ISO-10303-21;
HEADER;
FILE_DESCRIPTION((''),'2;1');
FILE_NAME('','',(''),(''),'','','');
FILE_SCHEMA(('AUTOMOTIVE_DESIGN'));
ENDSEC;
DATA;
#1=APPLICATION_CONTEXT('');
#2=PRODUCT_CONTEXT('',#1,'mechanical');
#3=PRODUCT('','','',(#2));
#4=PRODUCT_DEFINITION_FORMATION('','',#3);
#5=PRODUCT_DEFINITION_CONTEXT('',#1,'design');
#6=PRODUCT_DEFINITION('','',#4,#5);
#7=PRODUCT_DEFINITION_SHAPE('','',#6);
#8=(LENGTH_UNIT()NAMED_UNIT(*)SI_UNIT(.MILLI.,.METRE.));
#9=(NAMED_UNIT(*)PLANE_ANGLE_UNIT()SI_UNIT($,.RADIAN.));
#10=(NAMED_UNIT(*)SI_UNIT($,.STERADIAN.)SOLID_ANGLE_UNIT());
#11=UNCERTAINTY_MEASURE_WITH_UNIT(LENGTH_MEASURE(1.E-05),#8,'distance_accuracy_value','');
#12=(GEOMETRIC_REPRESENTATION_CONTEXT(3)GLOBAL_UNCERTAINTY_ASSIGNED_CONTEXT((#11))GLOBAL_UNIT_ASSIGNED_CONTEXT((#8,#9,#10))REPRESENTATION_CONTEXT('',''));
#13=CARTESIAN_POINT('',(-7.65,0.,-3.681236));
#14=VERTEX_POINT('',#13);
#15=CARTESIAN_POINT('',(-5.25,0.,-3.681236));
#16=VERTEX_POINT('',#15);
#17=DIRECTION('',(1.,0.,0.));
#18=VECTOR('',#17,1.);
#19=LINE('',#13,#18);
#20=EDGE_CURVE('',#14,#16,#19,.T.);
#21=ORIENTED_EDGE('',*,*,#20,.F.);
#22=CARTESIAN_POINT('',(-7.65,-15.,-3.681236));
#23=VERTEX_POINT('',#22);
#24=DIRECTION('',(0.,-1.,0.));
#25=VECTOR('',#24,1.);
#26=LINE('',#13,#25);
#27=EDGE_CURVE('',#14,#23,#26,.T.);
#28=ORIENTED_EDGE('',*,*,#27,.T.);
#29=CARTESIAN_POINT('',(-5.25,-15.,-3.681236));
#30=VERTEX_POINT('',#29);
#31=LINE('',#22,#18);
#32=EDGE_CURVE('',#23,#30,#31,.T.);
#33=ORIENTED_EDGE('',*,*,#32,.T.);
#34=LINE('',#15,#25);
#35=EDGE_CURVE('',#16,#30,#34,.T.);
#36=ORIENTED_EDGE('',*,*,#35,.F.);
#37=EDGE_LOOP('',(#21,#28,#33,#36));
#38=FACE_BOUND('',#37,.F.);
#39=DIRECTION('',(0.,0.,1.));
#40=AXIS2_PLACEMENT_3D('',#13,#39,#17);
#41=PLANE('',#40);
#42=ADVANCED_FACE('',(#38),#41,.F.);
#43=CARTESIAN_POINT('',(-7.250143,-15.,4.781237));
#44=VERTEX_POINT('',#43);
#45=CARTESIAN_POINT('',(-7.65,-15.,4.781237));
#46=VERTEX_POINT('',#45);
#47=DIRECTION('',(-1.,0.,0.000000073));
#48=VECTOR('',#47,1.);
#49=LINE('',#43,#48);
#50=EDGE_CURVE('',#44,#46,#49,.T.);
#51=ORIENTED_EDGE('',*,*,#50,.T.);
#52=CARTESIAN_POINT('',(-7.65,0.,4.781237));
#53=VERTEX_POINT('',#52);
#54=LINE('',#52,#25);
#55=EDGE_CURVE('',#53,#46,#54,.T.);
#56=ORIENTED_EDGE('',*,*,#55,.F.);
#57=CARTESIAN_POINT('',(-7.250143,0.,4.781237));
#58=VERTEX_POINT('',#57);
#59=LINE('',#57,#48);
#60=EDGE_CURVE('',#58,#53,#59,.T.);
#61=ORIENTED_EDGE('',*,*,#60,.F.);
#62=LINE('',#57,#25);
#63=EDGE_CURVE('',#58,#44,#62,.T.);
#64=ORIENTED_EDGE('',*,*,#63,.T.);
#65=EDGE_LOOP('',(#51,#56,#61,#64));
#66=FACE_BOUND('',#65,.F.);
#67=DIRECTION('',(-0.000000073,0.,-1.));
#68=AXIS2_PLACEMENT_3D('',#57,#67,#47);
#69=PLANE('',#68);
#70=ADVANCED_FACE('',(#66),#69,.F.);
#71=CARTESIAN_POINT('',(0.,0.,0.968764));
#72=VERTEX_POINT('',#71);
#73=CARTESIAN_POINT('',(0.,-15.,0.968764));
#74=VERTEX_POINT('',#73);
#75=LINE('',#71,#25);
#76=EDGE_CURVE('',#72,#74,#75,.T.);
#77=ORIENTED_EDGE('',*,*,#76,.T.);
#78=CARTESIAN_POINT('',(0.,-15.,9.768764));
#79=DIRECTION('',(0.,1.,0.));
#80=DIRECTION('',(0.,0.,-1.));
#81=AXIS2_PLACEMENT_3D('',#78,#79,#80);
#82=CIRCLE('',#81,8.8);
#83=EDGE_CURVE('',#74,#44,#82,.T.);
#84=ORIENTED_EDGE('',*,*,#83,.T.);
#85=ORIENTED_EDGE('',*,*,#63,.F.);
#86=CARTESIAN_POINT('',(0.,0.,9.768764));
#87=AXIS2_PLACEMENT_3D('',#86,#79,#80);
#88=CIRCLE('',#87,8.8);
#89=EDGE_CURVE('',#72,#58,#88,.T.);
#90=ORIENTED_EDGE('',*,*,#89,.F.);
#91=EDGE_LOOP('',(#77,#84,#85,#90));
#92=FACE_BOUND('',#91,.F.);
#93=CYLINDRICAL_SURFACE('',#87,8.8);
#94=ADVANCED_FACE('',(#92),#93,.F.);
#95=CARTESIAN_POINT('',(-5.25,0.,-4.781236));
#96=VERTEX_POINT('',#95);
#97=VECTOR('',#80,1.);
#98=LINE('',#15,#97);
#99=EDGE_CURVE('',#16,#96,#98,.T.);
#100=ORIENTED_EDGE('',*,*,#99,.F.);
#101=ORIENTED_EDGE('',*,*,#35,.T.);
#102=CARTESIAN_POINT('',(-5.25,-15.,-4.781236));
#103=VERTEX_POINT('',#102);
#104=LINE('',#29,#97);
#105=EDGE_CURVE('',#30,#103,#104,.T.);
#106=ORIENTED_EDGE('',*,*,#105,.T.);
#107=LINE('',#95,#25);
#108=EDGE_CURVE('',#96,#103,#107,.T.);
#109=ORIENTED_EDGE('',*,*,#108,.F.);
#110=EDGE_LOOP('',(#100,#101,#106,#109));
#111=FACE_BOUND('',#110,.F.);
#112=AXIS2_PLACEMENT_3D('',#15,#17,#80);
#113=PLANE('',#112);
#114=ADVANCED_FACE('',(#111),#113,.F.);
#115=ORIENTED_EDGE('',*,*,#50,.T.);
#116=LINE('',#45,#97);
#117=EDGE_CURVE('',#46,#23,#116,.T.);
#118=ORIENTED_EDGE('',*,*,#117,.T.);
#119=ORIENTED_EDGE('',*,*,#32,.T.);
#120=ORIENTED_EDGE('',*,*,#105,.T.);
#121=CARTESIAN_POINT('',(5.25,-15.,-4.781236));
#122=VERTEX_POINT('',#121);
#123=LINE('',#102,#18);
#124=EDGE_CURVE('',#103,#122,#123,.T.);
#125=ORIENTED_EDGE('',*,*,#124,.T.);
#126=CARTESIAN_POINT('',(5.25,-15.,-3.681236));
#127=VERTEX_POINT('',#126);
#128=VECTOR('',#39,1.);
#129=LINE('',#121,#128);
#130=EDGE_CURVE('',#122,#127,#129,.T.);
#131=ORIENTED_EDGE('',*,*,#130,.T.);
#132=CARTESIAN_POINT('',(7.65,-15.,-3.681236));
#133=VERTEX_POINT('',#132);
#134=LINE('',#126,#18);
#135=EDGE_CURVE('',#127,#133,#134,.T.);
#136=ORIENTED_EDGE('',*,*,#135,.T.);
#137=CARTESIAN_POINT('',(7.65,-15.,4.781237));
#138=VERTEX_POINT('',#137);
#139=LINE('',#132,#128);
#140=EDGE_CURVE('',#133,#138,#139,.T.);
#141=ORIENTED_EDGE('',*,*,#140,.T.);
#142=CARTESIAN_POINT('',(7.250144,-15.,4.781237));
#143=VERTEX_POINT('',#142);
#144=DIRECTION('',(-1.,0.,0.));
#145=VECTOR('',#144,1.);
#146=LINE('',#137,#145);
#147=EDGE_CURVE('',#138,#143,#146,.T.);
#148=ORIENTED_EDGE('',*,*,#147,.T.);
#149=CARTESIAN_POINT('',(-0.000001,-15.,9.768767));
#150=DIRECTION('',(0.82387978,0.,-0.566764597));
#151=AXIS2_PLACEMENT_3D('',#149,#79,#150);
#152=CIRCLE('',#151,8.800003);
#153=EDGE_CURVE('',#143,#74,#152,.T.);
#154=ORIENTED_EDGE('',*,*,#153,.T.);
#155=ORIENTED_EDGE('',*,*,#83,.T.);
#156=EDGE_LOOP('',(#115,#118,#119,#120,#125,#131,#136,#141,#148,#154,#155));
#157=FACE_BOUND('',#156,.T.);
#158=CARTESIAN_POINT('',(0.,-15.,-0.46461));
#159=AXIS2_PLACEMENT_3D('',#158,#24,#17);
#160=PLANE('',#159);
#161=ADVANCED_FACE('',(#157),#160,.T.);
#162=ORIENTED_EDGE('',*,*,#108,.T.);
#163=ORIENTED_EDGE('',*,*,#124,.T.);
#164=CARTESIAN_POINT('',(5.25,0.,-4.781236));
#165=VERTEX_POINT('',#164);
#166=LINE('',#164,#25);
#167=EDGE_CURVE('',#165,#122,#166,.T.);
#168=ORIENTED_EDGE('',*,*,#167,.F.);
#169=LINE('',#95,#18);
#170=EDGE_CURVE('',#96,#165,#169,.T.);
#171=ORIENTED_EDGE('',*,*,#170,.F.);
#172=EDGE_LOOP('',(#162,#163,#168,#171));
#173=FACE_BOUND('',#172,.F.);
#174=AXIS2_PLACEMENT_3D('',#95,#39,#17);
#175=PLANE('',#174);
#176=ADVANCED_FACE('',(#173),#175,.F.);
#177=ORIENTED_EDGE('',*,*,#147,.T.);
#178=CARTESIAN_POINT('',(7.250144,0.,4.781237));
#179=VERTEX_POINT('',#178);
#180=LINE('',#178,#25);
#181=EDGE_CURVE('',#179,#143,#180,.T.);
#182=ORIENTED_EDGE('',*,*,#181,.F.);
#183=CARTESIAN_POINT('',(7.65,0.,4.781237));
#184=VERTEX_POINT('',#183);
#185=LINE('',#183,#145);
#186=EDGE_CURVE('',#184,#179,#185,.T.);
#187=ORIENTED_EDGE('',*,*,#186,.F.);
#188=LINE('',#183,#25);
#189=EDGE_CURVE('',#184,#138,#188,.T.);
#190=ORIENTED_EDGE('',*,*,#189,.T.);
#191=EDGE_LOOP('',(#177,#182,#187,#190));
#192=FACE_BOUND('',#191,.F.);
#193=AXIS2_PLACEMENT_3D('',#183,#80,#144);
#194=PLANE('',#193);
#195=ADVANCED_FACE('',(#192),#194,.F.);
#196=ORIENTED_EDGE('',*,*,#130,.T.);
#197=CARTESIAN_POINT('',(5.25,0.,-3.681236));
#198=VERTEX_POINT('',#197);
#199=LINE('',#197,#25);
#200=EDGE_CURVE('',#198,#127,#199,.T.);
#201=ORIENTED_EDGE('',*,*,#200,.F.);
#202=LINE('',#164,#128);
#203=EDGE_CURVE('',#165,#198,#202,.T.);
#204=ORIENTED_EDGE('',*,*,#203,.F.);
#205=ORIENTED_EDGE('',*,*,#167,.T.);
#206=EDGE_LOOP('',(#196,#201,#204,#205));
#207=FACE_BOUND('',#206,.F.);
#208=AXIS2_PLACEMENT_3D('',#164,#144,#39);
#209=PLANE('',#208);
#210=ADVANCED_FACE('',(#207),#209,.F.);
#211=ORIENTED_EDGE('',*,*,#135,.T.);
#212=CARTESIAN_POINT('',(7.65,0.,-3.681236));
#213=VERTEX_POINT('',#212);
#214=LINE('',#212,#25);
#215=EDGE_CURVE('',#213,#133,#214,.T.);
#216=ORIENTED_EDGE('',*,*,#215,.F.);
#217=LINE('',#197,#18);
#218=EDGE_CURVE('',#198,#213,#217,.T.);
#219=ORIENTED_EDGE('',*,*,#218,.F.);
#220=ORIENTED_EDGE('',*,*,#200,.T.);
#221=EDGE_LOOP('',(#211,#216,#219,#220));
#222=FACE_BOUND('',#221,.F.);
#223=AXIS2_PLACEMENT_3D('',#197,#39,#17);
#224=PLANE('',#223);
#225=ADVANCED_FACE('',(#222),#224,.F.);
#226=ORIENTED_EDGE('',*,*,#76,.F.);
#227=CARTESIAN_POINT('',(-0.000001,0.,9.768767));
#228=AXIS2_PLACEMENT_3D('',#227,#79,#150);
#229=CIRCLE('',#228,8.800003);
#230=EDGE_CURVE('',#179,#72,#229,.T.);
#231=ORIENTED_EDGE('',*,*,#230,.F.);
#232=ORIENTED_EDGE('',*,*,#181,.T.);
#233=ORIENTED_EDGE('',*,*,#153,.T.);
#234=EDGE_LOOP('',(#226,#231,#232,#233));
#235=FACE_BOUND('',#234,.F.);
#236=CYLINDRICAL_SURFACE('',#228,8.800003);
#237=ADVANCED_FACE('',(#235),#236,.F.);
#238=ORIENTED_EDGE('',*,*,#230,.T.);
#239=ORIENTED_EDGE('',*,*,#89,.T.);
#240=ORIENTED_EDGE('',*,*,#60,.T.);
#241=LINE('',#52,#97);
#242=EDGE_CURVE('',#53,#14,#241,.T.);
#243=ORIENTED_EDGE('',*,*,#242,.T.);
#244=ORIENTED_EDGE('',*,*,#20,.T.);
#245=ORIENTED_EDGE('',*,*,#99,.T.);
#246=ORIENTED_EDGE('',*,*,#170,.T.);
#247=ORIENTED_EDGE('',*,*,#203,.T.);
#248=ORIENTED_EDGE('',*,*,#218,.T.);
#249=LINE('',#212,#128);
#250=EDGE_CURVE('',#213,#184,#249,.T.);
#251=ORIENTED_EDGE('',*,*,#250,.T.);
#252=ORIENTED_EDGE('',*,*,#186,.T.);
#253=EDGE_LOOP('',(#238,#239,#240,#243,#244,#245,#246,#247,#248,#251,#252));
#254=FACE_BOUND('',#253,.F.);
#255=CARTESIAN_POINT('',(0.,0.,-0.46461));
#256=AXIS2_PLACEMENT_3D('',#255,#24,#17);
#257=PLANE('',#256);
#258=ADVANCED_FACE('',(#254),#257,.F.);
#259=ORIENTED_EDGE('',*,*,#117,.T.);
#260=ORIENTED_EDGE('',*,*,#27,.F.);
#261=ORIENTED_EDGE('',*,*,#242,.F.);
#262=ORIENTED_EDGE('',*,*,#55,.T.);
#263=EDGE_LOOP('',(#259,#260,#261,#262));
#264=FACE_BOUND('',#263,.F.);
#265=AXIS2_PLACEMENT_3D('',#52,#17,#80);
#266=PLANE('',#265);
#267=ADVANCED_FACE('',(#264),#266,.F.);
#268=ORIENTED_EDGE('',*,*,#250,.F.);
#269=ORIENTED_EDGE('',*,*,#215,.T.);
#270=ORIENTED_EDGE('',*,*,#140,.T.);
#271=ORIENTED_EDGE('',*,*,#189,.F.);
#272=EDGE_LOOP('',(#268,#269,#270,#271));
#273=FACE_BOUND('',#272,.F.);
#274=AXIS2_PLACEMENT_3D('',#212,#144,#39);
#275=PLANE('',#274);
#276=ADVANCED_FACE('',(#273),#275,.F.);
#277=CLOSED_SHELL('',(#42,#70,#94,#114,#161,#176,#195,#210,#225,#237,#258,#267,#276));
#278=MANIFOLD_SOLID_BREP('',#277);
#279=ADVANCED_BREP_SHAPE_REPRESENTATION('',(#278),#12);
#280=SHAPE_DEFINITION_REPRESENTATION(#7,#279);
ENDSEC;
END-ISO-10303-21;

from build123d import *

# Parameters (mm, degrees)
F1_DEPTH = 15


# Not quite as in the source:
# - ends of sketch curves that miss each other by under 0.0002 mm in the source are joined


with BuildPart() as f1:
    # F0 (on Front) → F1 (new body)
    with BuildSketch(Plane.XZ):
        with BuildLine():
            Line((7.65, 4.781237), (7.250144, 4.781237))
            ThreePointArc((7.250144, 4.781237), (4.0957152155, 1.9799825245), (0, 0.968764))
            ThreePointArc((0, 0.968764), (-4.0957149647, 1.9799823926), (-7.2501430423, 4.7812369709))
            Line((-7.2501430423, 4.7812369709), (-7.65, 4.781237))
            Line((-7.65, 4.781237), (-7.65, -3.681236))
            Line((-7.65, -3.681236), (-5.25, -3.681236))
            Line((-5.25, -3.681236), (-5.25, -4.781236))
            Line((-5.25, -4.781236), (0, -4.781236))
            Line((0, -4.781236), (5.25, -4.781236))
            Line((5.25, -4.781236), (5.25, -3.681236))
            Line((5.25, -3.681236), (7.65, -3.681236))
            Line((7.65, -3.681236), (7.65, 4.781237))
        make_face()
    extrude(amount=F1_DEPTH)


solid = f1.part
